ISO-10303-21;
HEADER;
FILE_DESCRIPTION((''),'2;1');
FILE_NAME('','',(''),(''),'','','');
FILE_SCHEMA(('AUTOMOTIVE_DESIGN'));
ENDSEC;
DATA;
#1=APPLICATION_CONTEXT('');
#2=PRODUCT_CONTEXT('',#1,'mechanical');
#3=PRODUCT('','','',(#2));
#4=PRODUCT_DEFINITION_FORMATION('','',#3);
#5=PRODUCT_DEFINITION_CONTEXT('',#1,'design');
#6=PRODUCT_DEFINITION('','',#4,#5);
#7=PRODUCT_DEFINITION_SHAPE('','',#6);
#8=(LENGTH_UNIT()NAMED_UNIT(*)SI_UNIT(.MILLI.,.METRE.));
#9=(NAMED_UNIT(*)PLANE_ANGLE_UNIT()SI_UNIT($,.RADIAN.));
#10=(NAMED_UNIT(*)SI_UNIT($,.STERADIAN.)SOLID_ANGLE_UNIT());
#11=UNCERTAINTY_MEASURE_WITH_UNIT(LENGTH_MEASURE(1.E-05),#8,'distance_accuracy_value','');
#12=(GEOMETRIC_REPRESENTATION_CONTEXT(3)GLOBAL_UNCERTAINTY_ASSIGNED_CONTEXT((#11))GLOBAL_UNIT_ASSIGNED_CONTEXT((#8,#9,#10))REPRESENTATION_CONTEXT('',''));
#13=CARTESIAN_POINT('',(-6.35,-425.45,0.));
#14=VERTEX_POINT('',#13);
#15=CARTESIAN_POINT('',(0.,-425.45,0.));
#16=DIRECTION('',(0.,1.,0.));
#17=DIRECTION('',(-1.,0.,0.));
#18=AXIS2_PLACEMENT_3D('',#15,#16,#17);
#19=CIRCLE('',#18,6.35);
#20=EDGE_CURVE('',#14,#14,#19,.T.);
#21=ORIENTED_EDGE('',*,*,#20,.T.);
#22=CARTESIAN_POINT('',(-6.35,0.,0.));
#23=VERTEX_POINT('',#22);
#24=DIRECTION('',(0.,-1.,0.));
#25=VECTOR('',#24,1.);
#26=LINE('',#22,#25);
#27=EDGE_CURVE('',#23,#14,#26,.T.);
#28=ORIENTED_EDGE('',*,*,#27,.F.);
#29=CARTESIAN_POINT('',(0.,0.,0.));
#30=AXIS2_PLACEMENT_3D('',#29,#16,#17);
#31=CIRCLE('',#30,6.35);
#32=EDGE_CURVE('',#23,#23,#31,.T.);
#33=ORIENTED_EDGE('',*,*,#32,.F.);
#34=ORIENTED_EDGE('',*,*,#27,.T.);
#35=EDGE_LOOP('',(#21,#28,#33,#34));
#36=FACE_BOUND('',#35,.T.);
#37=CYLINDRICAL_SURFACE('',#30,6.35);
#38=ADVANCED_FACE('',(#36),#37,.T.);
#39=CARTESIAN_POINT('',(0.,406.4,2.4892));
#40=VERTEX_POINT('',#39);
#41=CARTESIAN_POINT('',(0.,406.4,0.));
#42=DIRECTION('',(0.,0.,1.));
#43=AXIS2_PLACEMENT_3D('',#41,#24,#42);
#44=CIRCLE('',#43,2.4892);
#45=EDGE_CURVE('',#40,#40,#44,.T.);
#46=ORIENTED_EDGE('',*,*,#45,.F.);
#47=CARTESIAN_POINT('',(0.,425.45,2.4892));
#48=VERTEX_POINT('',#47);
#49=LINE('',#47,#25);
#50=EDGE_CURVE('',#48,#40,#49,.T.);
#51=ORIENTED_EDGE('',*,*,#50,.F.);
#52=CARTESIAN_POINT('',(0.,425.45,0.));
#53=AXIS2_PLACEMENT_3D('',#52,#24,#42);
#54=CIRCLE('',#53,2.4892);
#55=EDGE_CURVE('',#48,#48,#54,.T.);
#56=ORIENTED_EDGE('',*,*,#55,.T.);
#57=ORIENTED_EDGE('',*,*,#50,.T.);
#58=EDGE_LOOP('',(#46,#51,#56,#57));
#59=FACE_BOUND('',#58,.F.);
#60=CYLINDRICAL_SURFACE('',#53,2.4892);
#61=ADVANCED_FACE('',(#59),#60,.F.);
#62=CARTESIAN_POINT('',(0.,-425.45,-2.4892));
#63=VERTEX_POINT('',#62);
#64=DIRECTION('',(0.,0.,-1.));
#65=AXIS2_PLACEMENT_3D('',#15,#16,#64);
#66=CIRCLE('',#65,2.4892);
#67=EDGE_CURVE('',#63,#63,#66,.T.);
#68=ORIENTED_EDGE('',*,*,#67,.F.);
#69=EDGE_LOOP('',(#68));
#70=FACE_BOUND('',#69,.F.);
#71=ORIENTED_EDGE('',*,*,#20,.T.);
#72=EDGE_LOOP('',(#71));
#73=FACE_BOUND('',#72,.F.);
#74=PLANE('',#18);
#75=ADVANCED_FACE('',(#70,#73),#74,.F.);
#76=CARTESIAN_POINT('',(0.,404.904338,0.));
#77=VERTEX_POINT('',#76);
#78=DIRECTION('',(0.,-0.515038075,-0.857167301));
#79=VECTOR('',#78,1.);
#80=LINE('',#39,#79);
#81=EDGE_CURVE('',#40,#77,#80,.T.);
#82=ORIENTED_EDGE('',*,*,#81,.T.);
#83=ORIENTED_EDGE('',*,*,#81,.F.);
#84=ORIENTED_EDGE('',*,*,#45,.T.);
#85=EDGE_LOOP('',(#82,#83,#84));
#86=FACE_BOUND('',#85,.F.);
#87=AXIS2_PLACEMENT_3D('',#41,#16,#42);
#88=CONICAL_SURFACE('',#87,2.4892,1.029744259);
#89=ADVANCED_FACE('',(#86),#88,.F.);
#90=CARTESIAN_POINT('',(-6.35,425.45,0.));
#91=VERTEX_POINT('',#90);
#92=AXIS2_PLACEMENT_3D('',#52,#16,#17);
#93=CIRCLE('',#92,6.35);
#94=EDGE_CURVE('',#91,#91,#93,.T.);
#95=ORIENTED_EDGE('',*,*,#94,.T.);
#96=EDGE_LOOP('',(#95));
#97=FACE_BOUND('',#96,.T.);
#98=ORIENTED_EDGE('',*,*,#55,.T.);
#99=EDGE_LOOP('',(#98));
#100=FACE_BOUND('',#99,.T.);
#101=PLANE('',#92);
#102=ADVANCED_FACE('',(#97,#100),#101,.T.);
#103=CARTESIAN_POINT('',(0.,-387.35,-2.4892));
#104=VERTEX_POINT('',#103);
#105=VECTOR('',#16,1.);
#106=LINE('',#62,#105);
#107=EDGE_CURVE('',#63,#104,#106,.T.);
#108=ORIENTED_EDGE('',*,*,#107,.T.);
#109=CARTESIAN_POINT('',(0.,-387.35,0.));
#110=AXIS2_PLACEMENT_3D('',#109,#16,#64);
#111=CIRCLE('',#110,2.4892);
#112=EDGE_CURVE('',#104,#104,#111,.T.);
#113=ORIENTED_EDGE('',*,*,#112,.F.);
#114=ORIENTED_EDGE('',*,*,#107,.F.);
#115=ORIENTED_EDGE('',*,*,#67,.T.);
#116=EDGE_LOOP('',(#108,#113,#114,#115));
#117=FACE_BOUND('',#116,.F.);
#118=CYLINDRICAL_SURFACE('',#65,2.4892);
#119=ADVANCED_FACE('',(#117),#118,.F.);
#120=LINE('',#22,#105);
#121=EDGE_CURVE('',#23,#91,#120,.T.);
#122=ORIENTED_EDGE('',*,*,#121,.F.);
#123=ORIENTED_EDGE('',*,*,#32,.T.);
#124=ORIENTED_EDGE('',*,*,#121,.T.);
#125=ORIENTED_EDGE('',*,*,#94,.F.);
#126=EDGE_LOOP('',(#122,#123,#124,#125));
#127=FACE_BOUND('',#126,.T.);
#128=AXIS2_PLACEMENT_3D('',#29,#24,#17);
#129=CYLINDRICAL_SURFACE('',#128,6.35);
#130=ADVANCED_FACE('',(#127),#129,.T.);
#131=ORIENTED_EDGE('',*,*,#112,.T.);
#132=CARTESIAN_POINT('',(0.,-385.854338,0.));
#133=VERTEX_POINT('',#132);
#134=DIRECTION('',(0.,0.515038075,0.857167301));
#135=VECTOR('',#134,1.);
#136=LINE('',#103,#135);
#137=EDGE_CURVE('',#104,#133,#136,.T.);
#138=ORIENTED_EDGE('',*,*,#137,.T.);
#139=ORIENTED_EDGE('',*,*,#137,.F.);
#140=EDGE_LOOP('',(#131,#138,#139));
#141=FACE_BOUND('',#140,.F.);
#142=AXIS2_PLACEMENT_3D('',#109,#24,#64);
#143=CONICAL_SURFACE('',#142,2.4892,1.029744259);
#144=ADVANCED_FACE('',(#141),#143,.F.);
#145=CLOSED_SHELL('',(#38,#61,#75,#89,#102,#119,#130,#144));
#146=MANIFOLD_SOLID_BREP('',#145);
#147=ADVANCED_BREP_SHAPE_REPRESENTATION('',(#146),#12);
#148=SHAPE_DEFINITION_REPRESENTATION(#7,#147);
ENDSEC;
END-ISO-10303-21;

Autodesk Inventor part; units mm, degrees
ref_plane "YZ Plane" through (0, 0, 0) normal (1, 0, 0) x (0, 1, 0)
ref_plane "XZ Plane" through (0, 0, 0) normal (0, 1, 0) x (-1, 0, 0)
ref_plane "XY Plane" through (0, 0, 0) normal (0, 0, 1) x (1, 0, 0)
sketch "Sketch1" plane through (0, 0, 0) normal (0, 1, 0) x (-1, 0, 0)
  circle A0 centre (0, 0) radius 6.35
  dimension "d0" = 12.7
extrude "Extrusion1" add sketch "Sketch1" along normal mid plane 850.9
sketch "Sketch2" plane through (0, 425.45, 0) normal (0, 1, 0) x (1, 0, 0)
  circle A0 centre (0, 0) radius 6.35 construction
hole "Hole1" at (0, 425.45, 0) direction (0, -1, 0) diameter 4.9784 depth 19.05 tip angle 118 thread size "1/4-20 UNC" class "2B" standard "ANSI Unified Screw Threads"
sketch "Sketch3" plane through (0, -425.45, 0) normal (0, -1, 0) x (1, 0, 0)
  circle A0 centre (0, 0) radius 6.35 construction
hole "Hole2" at (0, -425.45, 0) direction (0, 1, 0) diameter 4.9784 depth 38.1 tip angle 118 thread size "1/4-20 UNC" class "2B" standard "ANSI Unified Screw Threads"
properties part number "EL2-025" material "Aluminum 6061"
